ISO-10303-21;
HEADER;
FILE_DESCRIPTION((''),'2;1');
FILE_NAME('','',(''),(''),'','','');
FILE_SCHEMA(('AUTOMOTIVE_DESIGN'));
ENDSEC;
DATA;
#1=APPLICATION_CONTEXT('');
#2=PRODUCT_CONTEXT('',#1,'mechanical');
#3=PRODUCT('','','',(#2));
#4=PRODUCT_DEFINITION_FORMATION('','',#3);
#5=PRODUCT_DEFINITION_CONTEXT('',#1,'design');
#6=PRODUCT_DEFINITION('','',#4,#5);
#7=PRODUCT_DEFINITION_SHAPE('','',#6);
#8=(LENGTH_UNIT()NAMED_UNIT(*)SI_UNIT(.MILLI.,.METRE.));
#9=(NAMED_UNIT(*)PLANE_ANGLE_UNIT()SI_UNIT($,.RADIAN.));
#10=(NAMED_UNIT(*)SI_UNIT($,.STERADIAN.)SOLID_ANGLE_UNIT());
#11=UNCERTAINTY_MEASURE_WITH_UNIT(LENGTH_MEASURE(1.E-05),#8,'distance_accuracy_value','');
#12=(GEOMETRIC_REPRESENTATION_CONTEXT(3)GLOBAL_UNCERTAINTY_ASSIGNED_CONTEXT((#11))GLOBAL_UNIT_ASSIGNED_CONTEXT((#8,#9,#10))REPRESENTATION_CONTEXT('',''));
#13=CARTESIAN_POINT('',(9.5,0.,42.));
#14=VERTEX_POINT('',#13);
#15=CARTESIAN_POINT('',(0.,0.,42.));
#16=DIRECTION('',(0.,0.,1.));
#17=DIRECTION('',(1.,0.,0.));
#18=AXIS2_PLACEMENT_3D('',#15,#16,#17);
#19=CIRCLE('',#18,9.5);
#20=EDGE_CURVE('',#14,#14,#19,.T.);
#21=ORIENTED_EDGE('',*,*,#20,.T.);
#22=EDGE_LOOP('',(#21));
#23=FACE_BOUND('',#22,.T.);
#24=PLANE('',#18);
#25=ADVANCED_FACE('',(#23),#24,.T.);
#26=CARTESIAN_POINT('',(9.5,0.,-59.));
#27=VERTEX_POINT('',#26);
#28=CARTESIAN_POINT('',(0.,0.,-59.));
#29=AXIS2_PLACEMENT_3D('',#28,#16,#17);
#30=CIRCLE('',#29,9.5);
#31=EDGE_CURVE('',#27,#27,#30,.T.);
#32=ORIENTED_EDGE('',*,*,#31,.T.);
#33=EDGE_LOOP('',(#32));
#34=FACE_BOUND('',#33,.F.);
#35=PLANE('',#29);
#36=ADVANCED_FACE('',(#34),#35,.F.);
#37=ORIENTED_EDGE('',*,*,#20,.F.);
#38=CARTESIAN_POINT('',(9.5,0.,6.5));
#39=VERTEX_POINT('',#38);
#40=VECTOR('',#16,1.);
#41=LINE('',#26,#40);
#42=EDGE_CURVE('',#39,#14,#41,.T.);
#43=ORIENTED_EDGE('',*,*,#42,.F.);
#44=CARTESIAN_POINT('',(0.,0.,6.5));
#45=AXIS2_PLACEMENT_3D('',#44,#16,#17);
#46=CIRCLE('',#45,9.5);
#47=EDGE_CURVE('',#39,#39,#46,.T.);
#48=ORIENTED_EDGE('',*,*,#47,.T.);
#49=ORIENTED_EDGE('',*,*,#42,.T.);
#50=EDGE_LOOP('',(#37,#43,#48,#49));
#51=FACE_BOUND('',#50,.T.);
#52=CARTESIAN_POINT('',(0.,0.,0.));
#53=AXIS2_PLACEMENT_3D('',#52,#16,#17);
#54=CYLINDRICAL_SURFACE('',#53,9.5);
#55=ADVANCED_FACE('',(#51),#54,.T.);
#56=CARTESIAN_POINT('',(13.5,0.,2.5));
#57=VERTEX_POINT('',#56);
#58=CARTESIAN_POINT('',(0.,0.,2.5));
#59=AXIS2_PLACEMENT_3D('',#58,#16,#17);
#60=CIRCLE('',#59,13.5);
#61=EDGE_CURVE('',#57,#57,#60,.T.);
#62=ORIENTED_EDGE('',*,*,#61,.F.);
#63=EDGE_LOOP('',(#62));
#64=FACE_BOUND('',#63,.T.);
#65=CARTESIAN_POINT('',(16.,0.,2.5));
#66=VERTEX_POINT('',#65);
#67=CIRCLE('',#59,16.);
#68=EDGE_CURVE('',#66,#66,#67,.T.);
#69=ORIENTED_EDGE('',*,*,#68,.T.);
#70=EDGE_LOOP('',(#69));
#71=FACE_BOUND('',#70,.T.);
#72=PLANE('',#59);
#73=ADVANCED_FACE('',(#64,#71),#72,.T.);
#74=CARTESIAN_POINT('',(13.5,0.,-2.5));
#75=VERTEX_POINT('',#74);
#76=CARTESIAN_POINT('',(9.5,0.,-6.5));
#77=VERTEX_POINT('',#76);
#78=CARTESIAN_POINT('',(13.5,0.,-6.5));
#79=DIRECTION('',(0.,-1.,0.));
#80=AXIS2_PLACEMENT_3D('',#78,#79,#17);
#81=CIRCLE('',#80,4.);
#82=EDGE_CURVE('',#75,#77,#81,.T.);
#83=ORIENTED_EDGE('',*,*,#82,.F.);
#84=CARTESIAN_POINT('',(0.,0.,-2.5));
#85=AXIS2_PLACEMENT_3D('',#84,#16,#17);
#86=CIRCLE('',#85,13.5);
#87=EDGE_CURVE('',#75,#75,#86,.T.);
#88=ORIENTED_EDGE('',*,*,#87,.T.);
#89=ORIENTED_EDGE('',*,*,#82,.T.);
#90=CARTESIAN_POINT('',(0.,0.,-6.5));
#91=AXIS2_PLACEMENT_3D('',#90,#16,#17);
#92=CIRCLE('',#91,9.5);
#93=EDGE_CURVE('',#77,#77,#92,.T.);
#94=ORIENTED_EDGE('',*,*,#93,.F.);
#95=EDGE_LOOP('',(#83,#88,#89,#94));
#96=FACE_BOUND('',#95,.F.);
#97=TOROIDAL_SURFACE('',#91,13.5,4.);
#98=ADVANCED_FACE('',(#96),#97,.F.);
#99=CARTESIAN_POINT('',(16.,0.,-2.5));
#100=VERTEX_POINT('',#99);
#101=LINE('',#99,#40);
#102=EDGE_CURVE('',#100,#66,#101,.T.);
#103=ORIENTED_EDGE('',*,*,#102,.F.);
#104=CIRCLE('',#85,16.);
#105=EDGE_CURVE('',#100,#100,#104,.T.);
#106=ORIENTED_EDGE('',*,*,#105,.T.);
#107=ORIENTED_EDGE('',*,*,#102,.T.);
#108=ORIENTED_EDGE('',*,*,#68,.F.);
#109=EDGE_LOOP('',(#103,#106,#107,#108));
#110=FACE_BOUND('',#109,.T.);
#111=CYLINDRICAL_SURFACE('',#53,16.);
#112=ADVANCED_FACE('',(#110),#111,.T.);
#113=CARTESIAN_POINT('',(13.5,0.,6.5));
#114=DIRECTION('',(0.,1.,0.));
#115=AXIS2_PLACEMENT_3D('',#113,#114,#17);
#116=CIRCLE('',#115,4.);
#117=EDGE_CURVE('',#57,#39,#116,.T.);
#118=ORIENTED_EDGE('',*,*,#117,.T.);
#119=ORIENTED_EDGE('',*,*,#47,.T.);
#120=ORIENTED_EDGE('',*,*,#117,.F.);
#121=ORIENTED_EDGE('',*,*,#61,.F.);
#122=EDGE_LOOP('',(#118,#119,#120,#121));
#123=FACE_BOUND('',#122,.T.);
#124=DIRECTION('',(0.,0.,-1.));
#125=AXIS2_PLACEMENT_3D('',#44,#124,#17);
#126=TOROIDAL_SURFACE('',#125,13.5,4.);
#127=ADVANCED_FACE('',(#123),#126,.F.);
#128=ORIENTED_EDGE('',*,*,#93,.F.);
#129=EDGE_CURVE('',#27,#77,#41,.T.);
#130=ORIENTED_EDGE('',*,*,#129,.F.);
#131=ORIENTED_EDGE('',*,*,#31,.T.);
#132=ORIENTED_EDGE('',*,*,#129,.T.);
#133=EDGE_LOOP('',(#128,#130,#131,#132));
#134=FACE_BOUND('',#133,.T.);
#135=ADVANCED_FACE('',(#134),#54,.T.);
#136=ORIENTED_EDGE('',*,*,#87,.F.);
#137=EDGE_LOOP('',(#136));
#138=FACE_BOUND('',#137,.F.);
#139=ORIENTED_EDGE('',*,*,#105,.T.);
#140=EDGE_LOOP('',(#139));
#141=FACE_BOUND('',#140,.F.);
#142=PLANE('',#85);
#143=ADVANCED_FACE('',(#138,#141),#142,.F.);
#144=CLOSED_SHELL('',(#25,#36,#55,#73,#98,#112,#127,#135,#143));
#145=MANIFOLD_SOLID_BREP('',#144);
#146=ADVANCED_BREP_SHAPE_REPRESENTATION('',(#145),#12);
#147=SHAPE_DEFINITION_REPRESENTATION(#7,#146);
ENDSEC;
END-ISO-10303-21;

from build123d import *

# Parameters (mm, degrees)
F0_R          = 9.5
F1_DEPTH      = 42
F1_DEPTH_BACK = 59
F2_R          = 16
F3_DEPTH      = 2.5
F3_DEPTH_BACK = 2.5
F4_R          = 4


with BuildPart() as f1:
    # F0 (on Top) → F1 (new body, two sides)
    with BuildSketch(Plane.XY) as f1_sk:
        Circle(F0_R)
    extrude(amount=F1_DEPTH)
    extrude(f1_sk.sketch, amount=-F1_DEPTH_BACK)

    # F2 (on Top) → F3 (join, two sides)
    with BuildSketch(Plane.XY) as f3_sk:
        Circle(F2_R)
    extrude(amount=F3_DEPTH)
    extrude(f3_sk.sketch, amount=-F3_DEPTH_BACK)

    # F4
    f4_edges = [f1.edges().sort_by_distance(p)[0] for p in [
        (-9.5, 0, -2.5),
        (-9.5, 0, 2.5),
    ]]
    fillet(f4_edges, radius=F4_R)


solid = f1.part
